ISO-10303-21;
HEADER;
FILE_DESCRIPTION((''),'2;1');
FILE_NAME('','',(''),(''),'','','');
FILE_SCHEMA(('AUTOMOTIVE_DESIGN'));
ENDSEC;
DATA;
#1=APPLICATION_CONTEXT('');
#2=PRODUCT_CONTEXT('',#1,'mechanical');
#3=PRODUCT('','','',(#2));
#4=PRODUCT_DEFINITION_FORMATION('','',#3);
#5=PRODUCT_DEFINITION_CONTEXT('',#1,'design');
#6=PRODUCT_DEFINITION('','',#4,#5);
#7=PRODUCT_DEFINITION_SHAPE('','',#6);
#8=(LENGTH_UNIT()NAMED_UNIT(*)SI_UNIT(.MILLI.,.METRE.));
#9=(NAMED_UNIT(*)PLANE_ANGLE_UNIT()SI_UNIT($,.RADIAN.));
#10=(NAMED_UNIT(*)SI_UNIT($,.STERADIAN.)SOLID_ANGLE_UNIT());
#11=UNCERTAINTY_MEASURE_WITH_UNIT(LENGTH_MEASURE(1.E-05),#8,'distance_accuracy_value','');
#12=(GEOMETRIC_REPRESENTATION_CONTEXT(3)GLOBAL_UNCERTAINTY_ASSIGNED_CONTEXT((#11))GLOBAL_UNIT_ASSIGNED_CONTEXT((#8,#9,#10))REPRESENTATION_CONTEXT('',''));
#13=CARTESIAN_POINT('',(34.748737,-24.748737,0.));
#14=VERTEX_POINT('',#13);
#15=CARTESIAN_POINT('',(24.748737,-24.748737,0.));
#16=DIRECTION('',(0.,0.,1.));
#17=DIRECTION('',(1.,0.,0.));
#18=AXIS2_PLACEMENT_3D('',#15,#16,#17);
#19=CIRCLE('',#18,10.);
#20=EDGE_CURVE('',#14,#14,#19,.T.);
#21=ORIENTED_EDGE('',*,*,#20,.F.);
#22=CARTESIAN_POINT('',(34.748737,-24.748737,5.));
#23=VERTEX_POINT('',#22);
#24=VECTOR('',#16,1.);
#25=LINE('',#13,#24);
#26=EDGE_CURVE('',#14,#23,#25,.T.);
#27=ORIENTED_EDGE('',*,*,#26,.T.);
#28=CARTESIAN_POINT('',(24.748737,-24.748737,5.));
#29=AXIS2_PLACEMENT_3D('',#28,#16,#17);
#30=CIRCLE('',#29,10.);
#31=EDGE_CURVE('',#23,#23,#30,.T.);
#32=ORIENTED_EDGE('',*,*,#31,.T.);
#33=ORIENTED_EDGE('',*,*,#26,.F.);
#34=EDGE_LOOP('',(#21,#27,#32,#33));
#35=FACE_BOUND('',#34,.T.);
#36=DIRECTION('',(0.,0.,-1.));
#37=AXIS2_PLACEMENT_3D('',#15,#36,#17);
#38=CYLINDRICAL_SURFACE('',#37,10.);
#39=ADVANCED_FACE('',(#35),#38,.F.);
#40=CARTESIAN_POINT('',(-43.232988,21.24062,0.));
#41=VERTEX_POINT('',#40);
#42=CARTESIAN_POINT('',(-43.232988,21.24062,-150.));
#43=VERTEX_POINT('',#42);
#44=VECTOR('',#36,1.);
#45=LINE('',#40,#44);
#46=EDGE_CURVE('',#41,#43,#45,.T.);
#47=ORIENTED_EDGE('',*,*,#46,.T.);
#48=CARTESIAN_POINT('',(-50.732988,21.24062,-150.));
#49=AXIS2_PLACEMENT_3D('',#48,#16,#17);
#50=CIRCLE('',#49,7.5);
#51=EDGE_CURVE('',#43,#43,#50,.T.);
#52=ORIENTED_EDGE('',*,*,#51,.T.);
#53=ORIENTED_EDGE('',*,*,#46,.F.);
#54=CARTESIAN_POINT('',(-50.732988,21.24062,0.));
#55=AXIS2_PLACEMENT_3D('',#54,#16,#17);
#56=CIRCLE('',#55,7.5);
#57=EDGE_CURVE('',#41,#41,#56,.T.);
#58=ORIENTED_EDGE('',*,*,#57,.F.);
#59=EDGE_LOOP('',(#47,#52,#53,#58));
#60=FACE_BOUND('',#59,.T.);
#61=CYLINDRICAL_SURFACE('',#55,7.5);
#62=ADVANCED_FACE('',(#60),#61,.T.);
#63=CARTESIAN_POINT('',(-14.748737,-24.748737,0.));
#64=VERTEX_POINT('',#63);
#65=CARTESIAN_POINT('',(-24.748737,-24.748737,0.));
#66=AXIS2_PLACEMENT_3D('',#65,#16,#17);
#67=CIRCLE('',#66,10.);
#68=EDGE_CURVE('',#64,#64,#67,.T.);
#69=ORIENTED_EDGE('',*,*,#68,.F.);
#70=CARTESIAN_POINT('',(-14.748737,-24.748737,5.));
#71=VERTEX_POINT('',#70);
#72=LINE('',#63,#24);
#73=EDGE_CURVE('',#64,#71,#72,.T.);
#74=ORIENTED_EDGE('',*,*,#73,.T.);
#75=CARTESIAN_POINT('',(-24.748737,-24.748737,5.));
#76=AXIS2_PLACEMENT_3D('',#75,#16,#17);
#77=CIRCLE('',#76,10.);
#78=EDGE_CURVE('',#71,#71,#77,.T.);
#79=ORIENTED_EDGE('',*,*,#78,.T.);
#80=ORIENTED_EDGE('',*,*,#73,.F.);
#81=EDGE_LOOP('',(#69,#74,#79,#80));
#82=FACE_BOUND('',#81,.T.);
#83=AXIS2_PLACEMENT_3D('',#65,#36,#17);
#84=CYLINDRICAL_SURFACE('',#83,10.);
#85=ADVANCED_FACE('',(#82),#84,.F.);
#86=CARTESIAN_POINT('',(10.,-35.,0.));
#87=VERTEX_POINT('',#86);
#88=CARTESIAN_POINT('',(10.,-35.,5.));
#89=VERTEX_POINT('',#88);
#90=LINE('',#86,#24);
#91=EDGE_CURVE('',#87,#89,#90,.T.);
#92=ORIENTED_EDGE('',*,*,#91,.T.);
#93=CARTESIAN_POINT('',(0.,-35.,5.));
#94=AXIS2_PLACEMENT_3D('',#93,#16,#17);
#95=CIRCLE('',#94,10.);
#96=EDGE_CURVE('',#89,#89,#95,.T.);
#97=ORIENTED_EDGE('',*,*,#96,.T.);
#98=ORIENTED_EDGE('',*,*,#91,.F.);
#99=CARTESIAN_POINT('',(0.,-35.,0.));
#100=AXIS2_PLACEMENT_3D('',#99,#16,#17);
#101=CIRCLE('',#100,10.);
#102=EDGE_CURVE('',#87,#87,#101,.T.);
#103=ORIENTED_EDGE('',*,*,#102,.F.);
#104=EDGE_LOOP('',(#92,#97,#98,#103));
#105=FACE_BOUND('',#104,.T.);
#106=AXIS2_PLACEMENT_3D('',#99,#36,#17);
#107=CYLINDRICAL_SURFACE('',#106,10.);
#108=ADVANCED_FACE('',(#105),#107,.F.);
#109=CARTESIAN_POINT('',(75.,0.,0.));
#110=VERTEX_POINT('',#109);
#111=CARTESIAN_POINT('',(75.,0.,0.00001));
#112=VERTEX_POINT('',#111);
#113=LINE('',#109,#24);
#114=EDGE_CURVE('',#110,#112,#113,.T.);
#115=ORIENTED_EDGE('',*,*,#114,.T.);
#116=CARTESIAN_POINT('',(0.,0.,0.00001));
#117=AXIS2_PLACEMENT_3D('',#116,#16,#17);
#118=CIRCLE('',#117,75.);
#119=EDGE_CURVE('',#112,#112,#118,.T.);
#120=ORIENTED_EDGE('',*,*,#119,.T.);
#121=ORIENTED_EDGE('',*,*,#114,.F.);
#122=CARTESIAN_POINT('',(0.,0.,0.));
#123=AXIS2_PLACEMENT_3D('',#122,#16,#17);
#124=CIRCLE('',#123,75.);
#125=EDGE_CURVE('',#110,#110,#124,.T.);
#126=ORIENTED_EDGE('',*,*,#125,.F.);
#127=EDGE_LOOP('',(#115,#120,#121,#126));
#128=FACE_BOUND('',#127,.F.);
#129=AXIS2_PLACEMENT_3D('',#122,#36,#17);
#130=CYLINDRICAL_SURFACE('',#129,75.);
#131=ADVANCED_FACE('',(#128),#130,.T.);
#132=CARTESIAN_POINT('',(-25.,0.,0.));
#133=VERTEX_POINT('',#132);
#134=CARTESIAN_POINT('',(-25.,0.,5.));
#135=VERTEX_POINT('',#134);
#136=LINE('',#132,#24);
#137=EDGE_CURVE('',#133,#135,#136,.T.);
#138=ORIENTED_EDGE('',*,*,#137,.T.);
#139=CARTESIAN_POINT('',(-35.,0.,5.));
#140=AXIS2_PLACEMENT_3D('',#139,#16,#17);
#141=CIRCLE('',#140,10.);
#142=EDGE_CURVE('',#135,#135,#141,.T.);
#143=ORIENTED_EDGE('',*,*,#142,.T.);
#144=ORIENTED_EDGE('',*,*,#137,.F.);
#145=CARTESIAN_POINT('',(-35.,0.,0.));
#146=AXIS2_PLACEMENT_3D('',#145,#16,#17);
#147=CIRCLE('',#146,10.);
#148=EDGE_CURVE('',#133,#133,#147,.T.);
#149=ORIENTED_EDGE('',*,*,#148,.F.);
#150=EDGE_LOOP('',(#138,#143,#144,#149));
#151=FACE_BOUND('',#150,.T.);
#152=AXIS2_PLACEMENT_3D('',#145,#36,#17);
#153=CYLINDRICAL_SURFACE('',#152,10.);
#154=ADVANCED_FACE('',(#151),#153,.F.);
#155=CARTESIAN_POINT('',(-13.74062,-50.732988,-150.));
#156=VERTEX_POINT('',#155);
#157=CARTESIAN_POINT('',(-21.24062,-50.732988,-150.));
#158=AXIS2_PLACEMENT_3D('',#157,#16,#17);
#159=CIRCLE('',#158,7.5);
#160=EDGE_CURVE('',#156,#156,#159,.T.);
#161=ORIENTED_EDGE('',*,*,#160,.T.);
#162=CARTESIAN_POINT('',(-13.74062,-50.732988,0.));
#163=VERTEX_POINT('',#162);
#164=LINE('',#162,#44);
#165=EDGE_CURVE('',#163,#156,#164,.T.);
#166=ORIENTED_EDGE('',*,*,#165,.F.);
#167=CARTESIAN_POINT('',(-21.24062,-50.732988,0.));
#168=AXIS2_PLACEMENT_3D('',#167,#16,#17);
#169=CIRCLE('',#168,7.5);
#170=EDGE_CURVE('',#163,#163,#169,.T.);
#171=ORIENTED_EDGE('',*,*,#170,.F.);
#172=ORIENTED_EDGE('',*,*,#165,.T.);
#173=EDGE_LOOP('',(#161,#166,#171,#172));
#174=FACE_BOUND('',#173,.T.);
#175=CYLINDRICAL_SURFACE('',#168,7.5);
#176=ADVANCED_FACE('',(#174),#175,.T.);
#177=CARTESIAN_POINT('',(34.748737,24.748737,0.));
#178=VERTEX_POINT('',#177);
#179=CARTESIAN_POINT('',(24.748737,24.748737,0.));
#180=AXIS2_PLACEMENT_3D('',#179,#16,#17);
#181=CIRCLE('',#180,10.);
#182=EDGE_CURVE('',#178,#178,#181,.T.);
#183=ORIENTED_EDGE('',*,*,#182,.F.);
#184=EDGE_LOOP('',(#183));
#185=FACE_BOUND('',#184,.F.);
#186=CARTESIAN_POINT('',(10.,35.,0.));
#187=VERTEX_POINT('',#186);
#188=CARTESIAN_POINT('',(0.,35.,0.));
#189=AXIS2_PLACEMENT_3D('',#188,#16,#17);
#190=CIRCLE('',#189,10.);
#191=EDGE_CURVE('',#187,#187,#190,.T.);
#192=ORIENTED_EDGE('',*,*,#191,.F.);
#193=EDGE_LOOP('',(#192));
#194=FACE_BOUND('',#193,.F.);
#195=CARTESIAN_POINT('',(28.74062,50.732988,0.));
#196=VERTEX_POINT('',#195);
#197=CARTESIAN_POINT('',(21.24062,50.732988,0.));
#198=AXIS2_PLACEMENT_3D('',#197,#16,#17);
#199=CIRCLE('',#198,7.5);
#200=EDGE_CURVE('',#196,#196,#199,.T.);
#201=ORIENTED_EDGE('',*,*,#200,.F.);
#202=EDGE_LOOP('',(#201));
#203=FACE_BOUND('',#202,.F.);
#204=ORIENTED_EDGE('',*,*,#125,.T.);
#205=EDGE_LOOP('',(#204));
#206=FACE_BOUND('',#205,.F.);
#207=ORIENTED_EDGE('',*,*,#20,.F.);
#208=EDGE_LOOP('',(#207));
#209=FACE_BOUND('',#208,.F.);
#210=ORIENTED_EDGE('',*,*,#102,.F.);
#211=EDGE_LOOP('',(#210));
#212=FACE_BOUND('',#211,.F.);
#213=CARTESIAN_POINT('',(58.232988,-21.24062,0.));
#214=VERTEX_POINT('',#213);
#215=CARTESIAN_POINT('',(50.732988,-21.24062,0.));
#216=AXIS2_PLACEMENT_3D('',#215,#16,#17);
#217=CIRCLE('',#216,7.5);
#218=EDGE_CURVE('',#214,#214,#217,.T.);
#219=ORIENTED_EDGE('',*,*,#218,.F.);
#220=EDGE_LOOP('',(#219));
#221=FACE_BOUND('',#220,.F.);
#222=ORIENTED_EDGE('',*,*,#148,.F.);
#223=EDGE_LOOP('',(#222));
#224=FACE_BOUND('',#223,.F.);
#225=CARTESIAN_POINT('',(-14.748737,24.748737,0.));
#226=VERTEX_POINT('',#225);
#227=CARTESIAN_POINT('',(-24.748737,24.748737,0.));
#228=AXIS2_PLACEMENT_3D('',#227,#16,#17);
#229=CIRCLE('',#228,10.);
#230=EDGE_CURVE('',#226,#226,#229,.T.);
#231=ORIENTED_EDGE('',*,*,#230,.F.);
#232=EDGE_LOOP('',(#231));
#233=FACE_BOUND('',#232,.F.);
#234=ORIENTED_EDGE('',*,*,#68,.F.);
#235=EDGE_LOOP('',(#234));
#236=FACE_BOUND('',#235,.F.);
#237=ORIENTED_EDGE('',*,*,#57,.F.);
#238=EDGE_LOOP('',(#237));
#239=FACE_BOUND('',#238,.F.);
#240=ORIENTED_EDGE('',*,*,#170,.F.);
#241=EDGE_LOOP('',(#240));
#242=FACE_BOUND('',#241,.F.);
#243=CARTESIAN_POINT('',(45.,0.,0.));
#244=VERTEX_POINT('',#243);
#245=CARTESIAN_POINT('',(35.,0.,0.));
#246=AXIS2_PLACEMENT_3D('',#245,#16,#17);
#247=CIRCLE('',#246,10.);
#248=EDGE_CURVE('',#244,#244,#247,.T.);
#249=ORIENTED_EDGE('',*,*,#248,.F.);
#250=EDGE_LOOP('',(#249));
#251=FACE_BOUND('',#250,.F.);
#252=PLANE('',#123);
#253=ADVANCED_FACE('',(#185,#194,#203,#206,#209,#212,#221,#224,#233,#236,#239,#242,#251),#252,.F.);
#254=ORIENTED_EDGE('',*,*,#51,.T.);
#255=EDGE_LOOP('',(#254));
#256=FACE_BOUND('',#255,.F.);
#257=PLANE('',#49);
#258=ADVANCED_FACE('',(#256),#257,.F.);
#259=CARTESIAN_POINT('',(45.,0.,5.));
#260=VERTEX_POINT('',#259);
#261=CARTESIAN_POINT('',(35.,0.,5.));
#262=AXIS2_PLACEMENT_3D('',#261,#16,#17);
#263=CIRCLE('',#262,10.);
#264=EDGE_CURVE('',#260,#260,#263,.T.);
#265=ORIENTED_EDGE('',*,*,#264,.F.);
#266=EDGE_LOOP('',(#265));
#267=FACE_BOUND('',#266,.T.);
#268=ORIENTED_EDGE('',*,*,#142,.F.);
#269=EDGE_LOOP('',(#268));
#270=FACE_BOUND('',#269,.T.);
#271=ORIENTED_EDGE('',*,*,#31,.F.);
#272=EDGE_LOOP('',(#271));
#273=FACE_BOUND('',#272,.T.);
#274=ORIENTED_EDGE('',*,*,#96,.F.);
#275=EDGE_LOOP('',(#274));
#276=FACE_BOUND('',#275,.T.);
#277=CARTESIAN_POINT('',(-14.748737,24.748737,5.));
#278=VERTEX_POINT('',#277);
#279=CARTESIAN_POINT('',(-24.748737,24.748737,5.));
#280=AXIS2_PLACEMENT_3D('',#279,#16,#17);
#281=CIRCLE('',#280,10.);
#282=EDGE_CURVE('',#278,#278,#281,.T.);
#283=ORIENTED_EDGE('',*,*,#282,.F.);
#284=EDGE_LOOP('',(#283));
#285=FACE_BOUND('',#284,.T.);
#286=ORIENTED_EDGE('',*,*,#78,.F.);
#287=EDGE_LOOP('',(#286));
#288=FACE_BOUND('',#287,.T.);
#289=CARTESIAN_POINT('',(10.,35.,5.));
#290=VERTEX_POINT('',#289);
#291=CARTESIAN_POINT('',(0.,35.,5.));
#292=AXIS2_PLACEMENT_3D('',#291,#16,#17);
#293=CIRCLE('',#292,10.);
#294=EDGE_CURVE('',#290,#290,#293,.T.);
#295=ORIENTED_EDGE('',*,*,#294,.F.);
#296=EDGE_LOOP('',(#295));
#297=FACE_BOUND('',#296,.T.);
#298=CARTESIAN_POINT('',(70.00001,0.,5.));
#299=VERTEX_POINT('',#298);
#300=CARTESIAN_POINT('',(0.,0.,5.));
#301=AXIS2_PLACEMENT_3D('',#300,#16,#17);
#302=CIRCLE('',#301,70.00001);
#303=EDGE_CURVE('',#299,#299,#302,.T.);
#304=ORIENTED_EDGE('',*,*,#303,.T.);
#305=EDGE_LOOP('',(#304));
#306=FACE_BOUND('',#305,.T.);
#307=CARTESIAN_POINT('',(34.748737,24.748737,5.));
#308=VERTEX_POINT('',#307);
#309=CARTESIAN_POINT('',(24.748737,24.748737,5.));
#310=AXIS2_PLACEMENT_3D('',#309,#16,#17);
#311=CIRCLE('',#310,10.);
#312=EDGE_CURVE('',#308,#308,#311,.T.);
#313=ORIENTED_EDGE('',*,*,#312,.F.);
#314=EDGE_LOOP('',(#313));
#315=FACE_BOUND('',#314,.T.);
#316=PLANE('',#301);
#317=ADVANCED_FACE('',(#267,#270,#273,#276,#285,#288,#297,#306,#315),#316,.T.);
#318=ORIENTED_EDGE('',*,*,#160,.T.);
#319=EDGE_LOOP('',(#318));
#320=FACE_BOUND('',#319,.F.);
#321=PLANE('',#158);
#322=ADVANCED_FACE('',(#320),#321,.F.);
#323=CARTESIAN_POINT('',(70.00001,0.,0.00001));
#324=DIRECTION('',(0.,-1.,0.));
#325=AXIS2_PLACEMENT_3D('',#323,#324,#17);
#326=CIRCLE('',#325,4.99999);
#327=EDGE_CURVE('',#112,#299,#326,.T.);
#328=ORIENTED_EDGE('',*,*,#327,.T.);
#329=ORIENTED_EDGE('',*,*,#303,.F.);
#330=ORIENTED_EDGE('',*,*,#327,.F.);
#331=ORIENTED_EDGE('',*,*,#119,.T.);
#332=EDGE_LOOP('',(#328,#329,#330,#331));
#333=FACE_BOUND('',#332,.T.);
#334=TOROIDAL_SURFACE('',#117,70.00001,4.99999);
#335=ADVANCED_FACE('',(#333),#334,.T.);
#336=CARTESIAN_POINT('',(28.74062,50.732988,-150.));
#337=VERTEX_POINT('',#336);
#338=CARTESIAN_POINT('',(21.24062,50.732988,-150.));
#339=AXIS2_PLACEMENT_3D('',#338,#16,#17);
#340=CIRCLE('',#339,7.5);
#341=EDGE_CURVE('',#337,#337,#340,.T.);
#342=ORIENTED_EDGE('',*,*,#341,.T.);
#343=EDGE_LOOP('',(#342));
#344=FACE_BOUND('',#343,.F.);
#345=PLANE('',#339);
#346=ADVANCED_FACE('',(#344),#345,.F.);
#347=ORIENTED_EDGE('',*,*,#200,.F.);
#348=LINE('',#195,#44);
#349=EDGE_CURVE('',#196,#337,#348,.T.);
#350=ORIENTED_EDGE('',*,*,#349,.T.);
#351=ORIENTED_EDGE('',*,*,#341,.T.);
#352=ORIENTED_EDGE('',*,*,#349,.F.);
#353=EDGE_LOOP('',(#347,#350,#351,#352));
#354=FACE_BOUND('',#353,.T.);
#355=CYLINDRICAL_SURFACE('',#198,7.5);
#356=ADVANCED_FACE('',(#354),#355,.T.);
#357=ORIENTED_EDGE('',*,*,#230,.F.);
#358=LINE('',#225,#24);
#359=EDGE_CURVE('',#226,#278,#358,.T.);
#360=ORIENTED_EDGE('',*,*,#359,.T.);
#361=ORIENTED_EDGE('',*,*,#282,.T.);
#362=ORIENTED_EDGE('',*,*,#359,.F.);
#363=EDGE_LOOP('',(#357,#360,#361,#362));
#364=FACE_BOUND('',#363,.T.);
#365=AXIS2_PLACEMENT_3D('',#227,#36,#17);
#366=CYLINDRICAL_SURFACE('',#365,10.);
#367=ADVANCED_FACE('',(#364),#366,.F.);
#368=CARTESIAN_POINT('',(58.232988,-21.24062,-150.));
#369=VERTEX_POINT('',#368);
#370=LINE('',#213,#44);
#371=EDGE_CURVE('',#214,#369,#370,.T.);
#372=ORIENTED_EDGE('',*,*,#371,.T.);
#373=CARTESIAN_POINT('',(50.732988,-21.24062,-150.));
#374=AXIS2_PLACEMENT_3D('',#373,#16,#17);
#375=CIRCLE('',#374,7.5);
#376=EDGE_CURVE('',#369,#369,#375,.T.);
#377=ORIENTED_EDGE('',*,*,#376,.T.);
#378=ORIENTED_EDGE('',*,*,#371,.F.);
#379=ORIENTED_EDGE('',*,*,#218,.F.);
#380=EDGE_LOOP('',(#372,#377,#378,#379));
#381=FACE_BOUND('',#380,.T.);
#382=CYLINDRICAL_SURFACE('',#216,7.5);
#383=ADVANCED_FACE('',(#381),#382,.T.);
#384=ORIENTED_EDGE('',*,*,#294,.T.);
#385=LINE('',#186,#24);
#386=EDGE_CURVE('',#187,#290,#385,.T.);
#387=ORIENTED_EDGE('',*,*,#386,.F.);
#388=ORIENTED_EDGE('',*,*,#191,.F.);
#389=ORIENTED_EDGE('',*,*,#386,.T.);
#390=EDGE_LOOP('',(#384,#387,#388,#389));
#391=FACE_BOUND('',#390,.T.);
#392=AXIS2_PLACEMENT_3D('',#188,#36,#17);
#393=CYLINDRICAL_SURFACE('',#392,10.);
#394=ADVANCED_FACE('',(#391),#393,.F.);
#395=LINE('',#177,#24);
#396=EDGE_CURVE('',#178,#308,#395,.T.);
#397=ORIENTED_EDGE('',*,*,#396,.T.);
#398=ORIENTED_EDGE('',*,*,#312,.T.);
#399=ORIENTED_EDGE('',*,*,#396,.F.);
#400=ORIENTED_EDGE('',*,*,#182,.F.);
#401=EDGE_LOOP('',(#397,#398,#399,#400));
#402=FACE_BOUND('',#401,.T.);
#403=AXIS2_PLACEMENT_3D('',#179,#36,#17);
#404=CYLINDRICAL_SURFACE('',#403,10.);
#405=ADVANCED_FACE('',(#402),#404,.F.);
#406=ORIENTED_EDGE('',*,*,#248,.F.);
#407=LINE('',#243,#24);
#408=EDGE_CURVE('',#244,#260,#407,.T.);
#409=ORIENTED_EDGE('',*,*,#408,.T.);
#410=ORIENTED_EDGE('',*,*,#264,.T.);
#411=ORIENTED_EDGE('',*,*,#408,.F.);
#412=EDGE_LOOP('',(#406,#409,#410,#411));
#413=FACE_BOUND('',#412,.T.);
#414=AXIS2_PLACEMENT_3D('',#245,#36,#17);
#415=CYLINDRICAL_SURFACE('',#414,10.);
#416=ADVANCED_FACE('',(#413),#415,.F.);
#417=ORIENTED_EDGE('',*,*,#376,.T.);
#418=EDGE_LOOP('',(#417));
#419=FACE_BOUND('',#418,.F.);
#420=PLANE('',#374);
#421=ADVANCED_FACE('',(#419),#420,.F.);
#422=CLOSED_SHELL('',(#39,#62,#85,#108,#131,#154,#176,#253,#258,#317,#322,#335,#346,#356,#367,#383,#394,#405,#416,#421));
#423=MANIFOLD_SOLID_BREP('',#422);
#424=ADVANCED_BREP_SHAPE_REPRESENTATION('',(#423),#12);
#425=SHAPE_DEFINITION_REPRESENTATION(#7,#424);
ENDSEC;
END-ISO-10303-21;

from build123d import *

# Parameters (mm, degrees)
F0_R     = 75
F0_R_2   = 10
F1_DEPTH = 5
F2_R     = 4.99999
F3_R     = 7.5
F4_DEPTH = 150


# Not quite as in the source:
# - a fillet or chamfer is up to 0.001 mm smaller than in the source, because OpenCascade refuses the exact size


with BuildPart() as f1:
    # F0 (on Top) → F1 (new body)
    with BuildSketch(Plane.XY):
        Circle(F0_R)
        with Locations((-24.7487373415, -24.7487373415)):
            Circle(F0_R_2, mode=Mode.SUBTRACT)
        with Locations((0, -35)):
            Circle(F0_R_2, mode=Mode.SUBTRACT)
        with Locations((24.7487373415, -24.7487373415)):
            Circle(F0_R_2, mode=Mode.SUBTRACT)
        with Locations((-35, 0)):
            Circle(F0_R_2, mode=Mode.SUBTRACT)
        with Locations((-24.7487373415, 24.7487373415)):
            Circle(F0_R_2, mode=Mode.SUBTRACT)
        with Locations((35, 0)):
            Circle(F0_R_2, mode=Mode.SUBTRACT)
        with Locations((0, 35)):
            Circle(F0_R_2, mode=Mode.SUBTRACT)
        with Locations((24.7487373415, 24.7487373415)):
            Circle(F0_R_2, mode=Mode.SUBTRACT)
    extrude(amount=F1_DEPTH)

    # F2 (radius 5 in the source; OpenCascade refuses exactly that, so slightly less here)
    f2_edges = [f1.edges().sort_by_distance(p)[0] for p in [
        (-75, 0, 5),
    ]]
    fillet(f2_edges, radius=F2_R)

    # F3 (on face) → F4 (join)
    with BuildSketch(Plane.XY):
        with Locations((21.2406198754, 50.7329879596)):
            Circle(F3_R)
        with Locations((-50.7329879596, 21.2406198754)):
            Circle(F3_R)
        with Locations((-21.2406198754, -50.7329879596)):
            Circle(F3_R)
        with Locations((50.7329879596, -21.2406198754)):
            Circle(F3_R)
    extrude(amount=-F4_DEPTH)


solid = f1.part
